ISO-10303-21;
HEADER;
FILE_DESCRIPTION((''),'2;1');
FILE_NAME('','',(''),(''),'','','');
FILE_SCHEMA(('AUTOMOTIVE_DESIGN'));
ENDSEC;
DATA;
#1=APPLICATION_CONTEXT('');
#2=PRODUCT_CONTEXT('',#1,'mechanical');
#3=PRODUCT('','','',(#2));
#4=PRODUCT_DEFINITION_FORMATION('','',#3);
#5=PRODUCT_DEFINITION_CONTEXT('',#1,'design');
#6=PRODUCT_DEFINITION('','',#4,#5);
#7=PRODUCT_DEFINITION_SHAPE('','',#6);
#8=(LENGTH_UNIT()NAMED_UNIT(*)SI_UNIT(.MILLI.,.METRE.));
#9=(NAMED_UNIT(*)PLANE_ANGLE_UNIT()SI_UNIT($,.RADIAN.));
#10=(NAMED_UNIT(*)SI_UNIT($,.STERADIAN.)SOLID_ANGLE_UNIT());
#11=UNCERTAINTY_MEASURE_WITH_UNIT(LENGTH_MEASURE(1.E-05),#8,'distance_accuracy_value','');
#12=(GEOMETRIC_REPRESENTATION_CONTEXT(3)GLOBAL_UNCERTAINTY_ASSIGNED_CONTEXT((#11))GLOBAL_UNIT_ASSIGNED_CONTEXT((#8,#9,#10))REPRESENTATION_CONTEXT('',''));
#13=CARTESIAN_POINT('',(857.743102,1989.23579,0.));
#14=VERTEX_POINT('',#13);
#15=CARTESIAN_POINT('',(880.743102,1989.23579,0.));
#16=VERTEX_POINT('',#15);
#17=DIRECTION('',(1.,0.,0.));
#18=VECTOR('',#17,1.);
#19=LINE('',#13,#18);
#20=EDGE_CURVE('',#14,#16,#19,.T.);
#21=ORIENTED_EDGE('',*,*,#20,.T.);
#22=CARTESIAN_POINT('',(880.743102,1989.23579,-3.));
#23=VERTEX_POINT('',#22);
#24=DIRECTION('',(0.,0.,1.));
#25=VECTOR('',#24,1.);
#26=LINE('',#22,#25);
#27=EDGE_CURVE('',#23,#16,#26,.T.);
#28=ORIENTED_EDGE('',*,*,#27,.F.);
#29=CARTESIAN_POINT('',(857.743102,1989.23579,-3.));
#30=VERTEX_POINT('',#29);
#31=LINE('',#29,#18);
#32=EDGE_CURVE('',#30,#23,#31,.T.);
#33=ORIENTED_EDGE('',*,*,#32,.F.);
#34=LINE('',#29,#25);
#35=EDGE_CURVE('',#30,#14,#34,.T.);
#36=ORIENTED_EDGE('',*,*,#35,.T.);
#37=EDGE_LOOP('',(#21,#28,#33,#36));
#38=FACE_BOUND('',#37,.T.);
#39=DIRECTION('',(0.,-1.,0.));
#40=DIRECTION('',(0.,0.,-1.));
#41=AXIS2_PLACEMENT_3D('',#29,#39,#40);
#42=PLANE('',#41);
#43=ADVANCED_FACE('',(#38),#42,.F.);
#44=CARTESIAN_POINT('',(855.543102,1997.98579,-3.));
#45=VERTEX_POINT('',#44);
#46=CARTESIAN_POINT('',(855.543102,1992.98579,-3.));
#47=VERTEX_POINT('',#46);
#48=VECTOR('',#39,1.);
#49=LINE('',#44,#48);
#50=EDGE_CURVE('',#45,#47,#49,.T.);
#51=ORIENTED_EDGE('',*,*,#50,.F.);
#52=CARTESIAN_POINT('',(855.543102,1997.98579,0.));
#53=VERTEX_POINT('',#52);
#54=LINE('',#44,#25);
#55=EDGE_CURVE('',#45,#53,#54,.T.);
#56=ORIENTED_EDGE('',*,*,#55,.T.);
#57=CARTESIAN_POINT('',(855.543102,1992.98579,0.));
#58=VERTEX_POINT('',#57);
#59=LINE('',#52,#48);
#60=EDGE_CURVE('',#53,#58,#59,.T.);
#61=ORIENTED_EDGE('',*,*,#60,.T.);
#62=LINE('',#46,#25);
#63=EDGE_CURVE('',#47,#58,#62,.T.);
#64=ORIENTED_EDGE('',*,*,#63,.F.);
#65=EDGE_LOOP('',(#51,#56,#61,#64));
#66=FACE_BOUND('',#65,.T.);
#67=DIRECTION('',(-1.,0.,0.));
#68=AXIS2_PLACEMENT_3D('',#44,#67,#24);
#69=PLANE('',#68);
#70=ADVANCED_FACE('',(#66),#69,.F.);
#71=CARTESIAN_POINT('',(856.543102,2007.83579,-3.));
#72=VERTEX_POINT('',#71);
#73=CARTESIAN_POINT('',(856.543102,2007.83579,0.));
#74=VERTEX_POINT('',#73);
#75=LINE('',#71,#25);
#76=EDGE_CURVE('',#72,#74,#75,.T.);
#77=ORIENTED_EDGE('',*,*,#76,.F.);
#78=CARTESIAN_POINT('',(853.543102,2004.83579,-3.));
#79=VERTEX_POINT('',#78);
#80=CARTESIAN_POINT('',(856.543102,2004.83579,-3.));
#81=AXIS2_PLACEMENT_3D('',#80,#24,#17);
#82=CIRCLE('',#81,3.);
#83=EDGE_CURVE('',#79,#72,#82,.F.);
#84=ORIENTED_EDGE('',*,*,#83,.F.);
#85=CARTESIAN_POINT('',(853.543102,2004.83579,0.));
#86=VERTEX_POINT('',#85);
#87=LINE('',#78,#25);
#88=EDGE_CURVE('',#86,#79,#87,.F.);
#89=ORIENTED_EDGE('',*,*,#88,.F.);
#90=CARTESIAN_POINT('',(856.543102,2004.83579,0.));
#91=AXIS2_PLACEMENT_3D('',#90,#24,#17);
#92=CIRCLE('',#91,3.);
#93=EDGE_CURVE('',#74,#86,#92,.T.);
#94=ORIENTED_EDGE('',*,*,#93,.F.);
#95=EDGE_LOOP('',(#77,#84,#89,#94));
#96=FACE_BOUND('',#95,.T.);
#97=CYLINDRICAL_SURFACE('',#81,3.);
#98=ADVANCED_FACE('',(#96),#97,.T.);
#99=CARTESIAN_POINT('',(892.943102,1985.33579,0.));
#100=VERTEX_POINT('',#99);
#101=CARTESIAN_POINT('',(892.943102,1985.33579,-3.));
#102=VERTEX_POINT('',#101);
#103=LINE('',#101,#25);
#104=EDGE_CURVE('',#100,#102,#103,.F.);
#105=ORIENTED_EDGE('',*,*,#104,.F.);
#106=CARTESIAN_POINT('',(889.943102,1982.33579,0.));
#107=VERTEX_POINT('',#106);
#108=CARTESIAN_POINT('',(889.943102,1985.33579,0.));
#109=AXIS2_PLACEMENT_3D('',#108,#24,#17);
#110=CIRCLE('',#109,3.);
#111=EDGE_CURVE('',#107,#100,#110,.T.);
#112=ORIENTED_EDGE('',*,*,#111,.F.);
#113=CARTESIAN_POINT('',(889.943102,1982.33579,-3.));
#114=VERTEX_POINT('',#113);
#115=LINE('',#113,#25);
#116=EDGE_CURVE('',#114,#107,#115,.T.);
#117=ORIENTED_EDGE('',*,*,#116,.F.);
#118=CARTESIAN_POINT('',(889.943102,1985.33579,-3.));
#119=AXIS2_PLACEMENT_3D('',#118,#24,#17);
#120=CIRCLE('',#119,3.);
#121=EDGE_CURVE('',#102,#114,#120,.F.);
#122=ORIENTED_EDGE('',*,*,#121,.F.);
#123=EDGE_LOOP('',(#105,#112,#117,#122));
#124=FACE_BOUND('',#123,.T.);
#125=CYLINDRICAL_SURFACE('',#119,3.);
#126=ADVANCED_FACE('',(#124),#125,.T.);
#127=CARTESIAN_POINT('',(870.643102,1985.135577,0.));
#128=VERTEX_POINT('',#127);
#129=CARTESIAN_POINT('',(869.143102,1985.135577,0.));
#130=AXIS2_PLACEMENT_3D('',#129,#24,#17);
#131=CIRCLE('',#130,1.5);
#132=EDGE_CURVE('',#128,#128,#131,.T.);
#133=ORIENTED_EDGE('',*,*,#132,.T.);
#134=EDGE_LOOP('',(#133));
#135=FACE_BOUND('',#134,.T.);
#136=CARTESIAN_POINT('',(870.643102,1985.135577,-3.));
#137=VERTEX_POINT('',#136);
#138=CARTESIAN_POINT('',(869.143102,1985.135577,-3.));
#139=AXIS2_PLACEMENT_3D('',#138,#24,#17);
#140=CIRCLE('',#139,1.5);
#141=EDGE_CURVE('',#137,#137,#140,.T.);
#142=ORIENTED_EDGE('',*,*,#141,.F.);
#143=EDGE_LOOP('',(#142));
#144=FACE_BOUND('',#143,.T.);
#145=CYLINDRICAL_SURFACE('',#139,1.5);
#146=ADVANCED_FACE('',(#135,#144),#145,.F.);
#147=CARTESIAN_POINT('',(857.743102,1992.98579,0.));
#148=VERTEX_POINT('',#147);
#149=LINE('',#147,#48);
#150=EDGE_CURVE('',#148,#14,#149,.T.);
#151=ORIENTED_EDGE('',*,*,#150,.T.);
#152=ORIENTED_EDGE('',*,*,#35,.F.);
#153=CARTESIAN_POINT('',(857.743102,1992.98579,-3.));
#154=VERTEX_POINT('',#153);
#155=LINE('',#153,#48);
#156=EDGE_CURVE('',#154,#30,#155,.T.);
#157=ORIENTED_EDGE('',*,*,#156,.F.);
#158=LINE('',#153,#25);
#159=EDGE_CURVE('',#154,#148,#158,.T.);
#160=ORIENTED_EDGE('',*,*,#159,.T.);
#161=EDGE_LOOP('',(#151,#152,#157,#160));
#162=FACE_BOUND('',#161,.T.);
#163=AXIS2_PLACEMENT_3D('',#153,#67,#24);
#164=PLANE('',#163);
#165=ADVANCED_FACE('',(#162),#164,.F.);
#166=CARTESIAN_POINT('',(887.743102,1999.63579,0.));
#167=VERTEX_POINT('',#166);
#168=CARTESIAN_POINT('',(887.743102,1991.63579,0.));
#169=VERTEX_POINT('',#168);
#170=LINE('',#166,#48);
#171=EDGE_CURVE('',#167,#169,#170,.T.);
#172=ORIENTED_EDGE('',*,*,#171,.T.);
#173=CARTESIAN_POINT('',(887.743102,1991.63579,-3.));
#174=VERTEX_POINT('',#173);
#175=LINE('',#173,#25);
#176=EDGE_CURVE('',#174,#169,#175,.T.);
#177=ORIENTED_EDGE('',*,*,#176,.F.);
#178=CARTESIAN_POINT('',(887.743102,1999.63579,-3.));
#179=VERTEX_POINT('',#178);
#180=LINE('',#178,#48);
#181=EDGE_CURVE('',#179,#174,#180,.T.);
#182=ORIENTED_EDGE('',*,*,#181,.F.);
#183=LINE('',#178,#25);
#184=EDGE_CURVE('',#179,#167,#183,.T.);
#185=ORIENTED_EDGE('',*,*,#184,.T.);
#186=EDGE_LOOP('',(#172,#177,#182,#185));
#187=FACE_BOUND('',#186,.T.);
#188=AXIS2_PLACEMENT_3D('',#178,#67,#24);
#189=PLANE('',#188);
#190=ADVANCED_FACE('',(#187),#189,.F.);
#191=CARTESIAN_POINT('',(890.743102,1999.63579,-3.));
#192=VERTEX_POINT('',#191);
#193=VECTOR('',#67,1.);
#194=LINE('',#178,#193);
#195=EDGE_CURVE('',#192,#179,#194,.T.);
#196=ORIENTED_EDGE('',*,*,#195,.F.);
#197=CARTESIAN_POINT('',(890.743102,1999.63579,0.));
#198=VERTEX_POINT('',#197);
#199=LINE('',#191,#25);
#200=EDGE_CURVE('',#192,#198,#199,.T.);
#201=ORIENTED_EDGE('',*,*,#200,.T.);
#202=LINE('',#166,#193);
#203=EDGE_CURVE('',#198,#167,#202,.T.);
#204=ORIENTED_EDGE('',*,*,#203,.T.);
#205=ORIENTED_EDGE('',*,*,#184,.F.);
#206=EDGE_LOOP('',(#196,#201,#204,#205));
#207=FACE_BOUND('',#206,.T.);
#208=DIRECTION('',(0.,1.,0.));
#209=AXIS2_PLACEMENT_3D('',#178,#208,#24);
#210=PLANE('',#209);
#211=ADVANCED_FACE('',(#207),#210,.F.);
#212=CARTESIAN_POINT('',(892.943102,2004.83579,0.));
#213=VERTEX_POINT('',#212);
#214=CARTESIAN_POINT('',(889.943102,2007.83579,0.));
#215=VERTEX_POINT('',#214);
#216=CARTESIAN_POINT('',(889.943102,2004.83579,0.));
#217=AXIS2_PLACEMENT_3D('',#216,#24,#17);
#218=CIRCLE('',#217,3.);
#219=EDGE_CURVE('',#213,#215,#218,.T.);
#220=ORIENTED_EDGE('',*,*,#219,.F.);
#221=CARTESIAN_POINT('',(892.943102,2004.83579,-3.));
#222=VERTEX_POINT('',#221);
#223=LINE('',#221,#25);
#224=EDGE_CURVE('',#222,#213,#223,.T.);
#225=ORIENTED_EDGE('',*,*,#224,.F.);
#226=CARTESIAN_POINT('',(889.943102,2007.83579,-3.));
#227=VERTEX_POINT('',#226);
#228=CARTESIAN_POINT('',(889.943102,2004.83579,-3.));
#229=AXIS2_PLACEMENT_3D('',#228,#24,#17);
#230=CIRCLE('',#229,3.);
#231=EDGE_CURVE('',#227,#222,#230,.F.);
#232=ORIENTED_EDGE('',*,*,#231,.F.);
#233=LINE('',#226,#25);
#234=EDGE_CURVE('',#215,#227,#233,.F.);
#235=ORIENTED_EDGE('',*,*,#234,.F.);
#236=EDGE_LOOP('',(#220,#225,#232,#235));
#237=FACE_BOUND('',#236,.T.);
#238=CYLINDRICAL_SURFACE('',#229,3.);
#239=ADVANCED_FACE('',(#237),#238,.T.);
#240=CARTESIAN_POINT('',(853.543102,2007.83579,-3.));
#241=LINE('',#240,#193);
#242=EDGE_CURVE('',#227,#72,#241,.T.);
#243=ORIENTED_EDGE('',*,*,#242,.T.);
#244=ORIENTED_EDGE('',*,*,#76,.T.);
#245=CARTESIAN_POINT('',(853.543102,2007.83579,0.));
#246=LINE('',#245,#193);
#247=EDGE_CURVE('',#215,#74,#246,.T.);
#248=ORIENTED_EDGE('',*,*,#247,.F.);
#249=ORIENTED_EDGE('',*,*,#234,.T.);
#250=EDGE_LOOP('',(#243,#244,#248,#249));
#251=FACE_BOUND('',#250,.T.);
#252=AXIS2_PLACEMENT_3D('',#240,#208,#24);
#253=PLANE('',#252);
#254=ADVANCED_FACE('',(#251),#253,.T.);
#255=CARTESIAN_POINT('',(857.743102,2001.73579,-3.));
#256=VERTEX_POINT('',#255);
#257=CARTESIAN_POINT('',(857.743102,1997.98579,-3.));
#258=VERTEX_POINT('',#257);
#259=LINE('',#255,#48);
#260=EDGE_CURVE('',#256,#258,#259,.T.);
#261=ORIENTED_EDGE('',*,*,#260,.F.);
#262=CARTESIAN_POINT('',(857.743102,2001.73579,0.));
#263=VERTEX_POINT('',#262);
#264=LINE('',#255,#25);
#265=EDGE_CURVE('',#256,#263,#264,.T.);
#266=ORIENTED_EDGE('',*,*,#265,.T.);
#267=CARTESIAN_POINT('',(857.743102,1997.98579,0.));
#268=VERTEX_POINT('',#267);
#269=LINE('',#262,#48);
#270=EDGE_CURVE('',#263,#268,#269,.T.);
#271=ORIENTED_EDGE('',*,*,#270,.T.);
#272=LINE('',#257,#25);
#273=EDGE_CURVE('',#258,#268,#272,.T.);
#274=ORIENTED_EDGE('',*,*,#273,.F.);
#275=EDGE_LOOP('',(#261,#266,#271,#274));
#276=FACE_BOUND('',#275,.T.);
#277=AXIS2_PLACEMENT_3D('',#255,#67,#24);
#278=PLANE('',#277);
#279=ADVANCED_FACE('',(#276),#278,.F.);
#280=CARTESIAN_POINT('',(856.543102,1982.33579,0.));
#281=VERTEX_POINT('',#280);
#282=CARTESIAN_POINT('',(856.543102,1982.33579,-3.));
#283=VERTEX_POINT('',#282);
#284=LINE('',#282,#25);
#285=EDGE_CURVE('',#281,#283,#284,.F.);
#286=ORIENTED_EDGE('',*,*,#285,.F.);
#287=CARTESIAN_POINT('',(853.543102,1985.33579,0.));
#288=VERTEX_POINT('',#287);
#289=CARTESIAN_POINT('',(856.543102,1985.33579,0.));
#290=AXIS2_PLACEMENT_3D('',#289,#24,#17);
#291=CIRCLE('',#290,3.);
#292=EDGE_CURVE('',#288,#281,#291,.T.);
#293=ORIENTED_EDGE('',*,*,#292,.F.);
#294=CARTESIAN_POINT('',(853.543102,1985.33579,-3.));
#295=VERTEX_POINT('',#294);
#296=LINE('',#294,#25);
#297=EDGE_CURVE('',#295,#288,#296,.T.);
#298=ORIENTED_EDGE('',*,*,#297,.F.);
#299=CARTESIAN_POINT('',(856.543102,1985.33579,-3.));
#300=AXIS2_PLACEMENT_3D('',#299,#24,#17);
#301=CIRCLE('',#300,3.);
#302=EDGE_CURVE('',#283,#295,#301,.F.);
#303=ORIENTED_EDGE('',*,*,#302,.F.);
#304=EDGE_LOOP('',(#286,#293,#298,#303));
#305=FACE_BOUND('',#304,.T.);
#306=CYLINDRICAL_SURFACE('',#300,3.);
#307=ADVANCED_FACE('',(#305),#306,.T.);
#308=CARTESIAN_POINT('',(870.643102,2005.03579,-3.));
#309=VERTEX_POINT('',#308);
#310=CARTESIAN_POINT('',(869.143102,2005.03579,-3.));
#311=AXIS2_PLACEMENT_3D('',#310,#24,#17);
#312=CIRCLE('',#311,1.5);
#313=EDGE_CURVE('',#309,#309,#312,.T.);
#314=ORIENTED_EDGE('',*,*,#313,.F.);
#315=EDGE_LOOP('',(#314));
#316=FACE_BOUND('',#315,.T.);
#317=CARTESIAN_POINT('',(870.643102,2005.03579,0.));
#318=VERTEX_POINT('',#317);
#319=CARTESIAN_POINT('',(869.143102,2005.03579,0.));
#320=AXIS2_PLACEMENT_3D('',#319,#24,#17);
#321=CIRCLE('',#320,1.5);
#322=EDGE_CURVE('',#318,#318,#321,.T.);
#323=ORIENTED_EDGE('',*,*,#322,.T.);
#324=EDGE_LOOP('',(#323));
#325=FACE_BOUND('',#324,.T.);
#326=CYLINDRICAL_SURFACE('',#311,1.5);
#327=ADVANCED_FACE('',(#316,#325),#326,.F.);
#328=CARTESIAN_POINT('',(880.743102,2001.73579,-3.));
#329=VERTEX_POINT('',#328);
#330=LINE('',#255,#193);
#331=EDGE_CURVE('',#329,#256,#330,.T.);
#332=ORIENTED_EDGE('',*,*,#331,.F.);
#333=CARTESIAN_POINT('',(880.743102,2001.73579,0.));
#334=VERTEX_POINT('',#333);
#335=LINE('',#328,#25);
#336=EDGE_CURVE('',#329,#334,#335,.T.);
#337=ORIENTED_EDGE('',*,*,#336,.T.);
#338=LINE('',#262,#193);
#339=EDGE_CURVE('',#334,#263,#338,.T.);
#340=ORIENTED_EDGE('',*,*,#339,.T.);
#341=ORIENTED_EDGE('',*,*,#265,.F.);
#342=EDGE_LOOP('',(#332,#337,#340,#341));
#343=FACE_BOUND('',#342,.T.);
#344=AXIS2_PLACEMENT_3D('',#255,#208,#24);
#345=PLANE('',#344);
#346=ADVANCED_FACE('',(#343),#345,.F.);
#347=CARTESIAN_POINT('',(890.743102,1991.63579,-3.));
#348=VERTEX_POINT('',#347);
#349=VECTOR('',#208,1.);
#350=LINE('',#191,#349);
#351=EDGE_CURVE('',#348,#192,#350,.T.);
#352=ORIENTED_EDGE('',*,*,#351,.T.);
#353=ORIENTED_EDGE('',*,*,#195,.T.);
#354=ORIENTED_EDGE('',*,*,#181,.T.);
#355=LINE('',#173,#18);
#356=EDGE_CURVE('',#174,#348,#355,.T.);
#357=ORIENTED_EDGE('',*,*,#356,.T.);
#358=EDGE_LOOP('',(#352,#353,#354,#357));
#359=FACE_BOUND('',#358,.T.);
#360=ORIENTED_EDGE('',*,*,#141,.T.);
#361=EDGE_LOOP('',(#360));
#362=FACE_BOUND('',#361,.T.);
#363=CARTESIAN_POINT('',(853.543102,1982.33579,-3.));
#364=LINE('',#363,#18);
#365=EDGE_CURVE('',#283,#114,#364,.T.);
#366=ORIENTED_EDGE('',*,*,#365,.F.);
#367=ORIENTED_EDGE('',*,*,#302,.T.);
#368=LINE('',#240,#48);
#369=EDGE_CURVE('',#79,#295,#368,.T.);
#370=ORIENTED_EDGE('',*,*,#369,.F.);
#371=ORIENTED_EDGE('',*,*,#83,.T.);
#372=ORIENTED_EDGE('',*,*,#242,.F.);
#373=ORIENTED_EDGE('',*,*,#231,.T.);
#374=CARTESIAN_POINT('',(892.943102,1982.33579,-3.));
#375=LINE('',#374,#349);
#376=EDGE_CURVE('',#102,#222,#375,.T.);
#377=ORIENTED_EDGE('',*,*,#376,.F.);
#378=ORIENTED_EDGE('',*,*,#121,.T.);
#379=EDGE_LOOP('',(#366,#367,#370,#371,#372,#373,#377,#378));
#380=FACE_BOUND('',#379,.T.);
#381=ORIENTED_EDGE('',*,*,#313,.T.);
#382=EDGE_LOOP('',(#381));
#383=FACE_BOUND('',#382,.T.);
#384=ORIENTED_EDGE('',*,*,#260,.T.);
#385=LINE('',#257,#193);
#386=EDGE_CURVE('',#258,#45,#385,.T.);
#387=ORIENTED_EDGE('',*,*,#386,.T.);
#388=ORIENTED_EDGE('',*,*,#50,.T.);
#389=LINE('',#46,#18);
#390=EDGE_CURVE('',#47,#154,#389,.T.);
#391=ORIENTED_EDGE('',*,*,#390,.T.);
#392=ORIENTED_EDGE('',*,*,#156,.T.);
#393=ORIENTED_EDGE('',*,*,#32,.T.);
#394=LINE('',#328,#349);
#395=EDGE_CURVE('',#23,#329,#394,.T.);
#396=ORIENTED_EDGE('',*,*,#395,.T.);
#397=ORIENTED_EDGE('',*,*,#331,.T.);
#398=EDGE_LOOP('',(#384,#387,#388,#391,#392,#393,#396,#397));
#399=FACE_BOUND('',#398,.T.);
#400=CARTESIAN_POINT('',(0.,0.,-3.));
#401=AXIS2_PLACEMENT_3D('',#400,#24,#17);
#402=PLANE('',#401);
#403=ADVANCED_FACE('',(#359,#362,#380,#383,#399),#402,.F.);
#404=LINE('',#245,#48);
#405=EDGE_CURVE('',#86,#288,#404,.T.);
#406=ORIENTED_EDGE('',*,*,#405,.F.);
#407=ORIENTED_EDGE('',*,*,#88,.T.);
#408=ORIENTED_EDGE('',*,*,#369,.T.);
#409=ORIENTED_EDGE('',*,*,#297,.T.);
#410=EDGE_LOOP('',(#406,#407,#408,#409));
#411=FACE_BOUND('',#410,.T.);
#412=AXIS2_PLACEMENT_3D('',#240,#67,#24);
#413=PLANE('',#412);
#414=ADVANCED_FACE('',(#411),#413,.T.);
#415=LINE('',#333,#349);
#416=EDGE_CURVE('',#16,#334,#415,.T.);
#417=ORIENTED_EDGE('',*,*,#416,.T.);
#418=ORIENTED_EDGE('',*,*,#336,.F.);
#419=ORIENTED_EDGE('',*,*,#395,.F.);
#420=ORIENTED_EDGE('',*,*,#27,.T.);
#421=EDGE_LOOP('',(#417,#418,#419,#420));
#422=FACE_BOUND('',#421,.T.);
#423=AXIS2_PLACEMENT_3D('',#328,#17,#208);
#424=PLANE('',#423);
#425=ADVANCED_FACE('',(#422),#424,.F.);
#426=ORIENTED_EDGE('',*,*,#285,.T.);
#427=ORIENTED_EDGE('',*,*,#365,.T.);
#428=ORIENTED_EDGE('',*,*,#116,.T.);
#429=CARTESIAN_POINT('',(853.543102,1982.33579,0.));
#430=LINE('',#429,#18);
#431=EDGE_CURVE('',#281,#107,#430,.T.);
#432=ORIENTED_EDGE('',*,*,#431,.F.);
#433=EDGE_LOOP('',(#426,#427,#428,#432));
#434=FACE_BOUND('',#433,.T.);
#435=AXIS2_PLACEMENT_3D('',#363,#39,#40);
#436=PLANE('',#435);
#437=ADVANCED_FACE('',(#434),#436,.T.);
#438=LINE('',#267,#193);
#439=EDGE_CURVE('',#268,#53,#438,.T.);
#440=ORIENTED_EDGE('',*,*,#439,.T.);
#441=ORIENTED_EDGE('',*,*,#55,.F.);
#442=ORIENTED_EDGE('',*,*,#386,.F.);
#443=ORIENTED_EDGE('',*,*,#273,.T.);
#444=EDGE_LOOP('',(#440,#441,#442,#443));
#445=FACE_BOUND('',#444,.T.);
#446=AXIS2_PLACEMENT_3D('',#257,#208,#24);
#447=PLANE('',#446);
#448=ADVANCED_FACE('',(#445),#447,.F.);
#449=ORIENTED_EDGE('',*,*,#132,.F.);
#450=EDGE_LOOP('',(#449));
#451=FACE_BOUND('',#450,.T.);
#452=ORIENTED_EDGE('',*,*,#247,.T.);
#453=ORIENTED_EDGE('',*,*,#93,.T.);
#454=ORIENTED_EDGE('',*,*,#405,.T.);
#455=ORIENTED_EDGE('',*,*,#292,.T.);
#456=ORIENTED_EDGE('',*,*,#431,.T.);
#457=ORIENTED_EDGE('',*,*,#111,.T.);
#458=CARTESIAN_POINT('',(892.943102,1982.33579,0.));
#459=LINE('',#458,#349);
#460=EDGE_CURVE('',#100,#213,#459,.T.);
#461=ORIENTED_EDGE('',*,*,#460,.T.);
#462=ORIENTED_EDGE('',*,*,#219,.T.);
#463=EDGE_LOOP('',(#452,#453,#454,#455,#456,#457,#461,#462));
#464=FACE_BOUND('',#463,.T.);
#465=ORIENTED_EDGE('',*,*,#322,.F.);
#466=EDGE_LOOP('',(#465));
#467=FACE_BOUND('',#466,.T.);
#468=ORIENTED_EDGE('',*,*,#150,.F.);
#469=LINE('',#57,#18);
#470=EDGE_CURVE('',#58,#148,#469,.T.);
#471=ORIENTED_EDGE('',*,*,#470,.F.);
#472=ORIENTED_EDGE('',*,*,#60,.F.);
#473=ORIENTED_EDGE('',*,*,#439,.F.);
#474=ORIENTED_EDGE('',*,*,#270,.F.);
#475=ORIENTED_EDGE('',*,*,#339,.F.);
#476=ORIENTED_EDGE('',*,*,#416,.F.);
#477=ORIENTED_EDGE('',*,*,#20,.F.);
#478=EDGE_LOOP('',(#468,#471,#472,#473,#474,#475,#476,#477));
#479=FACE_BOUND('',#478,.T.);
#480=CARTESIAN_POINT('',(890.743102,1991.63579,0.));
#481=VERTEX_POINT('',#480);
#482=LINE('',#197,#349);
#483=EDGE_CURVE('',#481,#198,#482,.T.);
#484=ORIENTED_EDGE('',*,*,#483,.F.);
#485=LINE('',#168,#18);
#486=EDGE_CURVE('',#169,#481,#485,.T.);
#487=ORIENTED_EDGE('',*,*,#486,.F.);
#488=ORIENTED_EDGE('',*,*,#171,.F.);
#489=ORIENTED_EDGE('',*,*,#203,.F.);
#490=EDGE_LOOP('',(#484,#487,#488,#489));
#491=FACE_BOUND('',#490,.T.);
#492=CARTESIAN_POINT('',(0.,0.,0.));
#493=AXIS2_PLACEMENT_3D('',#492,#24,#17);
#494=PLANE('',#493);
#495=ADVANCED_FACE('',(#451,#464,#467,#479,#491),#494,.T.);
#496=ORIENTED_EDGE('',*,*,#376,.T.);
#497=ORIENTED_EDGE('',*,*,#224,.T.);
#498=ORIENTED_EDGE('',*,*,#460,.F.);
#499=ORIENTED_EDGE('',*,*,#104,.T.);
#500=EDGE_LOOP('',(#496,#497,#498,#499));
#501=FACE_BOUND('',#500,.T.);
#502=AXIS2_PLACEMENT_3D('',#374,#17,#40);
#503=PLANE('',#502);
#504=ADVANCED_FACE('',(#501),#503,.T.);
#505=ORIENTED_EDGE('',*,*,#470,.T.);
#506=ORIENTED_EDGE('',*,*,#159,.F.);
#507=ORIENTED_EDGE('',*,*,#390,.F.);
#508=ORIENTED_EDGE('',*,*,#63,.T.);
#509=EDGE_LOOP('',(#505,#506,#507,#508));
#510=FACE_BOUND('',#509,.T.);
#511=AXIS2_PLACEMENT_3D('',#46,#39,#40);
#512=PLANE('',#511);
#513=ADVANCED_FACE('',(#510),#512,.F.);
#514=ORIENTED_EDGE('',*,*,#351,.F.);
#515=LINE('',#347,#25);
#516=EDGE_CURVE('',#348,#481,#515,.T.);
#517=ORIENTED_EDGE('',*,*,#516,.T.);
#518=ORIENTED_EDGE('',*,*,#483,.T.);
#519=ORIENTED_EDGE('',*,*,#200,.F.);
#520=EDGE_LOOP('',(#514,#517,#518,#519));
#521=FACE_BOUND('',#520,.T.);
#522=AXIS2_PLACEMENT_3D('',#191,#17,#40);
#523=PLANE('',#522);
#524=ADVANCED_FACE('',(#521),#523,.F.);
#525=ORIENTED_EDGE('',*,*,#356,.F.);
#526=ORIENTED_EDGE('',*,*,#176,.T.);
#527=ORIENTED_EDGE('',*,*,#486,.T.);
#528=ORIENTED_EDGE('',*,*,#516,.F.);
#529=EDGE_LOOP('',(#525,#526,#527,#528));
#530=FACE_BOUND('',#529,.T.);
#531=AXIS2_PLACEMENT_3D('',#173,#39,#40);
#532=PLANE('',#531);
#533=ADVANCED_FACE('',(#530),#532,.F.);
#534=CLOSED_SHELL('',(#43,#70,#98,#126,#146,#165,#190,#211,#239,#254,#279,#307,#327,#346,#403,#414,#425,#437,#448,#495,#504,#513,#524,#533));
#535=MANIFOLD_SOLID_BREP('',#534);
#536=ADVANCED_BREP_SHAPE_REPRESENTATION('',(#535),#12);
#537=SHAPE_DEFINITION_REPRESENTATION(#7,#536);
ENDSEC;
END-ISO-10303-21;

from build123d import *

# Parameters (mm, degrees)
ESQUISSE1_W               = 39.4
ESQUISSE1_H               = 25.5
ESQUISSE1_R               = 1.5
ESQUISSE1_W_2             = 3
ESQUISSE1_H_2             = 8
T_LE_DE_BASE_PLI_E1_DEPTH = 3
CONG_1_R                  = 3


# Sheet-metal steps are written as plain solids
with BuildPart() as part:
    # Esquisse1 → Tôle de base pliée1 (new body)
    with BuildSketch(Plane.XY):
        with Locations((873.243101599, 1995.085790402)):
            Rectangle(ESQUISSE1_W, ESQUISSE1_H)
        with Locations((869.143101599, 2005.035790402)):
            Circle(ESQUISSE1_R, mode=Mode.SUBTRACT)
        with Locations((869.143101599, 1985.135577488)):
            Circle(ESQUISSE1_R, mode=Mode.SUBTRACT)
        Polygon((857.743101599, 1997.985790402), (855.543101599, 1997.985790402), (855.543101599, 1992.985790402), (857.743101599, 1992.985790402), (857.743101599, 1989.235790402), (880.743101599, 1989.235790402), (880.743101599, 2001.735790402), (857.743101599, 2001.735790402), align=None, mode=Mode.SUBTRACT)
        with Locations((889.243101599, 1995.635790402)):
            Rectangle(ESQUISSE1_W_2, ESQUISSE1_H_2, mode=Mode.SUBTRACT)
    extrude(amount=-T_LE_DE_BASE_PLI_E1_DEPTH)

    # Congé1
    cong_1_edges = [part.edges().sort_by_distance(p)[0] for p in [
        (853.543101599, 2007.835790402, -1.5),
        (892.943101599, 2007.835790402, -1.5),
        (892.943101599, 1982.335790402, -1.5),
        (853.543101599, 1982.335790402, -1.5),
    ]]
    fillet(cong_1_edges, radius=CONG_1_R)


solid = part.part
